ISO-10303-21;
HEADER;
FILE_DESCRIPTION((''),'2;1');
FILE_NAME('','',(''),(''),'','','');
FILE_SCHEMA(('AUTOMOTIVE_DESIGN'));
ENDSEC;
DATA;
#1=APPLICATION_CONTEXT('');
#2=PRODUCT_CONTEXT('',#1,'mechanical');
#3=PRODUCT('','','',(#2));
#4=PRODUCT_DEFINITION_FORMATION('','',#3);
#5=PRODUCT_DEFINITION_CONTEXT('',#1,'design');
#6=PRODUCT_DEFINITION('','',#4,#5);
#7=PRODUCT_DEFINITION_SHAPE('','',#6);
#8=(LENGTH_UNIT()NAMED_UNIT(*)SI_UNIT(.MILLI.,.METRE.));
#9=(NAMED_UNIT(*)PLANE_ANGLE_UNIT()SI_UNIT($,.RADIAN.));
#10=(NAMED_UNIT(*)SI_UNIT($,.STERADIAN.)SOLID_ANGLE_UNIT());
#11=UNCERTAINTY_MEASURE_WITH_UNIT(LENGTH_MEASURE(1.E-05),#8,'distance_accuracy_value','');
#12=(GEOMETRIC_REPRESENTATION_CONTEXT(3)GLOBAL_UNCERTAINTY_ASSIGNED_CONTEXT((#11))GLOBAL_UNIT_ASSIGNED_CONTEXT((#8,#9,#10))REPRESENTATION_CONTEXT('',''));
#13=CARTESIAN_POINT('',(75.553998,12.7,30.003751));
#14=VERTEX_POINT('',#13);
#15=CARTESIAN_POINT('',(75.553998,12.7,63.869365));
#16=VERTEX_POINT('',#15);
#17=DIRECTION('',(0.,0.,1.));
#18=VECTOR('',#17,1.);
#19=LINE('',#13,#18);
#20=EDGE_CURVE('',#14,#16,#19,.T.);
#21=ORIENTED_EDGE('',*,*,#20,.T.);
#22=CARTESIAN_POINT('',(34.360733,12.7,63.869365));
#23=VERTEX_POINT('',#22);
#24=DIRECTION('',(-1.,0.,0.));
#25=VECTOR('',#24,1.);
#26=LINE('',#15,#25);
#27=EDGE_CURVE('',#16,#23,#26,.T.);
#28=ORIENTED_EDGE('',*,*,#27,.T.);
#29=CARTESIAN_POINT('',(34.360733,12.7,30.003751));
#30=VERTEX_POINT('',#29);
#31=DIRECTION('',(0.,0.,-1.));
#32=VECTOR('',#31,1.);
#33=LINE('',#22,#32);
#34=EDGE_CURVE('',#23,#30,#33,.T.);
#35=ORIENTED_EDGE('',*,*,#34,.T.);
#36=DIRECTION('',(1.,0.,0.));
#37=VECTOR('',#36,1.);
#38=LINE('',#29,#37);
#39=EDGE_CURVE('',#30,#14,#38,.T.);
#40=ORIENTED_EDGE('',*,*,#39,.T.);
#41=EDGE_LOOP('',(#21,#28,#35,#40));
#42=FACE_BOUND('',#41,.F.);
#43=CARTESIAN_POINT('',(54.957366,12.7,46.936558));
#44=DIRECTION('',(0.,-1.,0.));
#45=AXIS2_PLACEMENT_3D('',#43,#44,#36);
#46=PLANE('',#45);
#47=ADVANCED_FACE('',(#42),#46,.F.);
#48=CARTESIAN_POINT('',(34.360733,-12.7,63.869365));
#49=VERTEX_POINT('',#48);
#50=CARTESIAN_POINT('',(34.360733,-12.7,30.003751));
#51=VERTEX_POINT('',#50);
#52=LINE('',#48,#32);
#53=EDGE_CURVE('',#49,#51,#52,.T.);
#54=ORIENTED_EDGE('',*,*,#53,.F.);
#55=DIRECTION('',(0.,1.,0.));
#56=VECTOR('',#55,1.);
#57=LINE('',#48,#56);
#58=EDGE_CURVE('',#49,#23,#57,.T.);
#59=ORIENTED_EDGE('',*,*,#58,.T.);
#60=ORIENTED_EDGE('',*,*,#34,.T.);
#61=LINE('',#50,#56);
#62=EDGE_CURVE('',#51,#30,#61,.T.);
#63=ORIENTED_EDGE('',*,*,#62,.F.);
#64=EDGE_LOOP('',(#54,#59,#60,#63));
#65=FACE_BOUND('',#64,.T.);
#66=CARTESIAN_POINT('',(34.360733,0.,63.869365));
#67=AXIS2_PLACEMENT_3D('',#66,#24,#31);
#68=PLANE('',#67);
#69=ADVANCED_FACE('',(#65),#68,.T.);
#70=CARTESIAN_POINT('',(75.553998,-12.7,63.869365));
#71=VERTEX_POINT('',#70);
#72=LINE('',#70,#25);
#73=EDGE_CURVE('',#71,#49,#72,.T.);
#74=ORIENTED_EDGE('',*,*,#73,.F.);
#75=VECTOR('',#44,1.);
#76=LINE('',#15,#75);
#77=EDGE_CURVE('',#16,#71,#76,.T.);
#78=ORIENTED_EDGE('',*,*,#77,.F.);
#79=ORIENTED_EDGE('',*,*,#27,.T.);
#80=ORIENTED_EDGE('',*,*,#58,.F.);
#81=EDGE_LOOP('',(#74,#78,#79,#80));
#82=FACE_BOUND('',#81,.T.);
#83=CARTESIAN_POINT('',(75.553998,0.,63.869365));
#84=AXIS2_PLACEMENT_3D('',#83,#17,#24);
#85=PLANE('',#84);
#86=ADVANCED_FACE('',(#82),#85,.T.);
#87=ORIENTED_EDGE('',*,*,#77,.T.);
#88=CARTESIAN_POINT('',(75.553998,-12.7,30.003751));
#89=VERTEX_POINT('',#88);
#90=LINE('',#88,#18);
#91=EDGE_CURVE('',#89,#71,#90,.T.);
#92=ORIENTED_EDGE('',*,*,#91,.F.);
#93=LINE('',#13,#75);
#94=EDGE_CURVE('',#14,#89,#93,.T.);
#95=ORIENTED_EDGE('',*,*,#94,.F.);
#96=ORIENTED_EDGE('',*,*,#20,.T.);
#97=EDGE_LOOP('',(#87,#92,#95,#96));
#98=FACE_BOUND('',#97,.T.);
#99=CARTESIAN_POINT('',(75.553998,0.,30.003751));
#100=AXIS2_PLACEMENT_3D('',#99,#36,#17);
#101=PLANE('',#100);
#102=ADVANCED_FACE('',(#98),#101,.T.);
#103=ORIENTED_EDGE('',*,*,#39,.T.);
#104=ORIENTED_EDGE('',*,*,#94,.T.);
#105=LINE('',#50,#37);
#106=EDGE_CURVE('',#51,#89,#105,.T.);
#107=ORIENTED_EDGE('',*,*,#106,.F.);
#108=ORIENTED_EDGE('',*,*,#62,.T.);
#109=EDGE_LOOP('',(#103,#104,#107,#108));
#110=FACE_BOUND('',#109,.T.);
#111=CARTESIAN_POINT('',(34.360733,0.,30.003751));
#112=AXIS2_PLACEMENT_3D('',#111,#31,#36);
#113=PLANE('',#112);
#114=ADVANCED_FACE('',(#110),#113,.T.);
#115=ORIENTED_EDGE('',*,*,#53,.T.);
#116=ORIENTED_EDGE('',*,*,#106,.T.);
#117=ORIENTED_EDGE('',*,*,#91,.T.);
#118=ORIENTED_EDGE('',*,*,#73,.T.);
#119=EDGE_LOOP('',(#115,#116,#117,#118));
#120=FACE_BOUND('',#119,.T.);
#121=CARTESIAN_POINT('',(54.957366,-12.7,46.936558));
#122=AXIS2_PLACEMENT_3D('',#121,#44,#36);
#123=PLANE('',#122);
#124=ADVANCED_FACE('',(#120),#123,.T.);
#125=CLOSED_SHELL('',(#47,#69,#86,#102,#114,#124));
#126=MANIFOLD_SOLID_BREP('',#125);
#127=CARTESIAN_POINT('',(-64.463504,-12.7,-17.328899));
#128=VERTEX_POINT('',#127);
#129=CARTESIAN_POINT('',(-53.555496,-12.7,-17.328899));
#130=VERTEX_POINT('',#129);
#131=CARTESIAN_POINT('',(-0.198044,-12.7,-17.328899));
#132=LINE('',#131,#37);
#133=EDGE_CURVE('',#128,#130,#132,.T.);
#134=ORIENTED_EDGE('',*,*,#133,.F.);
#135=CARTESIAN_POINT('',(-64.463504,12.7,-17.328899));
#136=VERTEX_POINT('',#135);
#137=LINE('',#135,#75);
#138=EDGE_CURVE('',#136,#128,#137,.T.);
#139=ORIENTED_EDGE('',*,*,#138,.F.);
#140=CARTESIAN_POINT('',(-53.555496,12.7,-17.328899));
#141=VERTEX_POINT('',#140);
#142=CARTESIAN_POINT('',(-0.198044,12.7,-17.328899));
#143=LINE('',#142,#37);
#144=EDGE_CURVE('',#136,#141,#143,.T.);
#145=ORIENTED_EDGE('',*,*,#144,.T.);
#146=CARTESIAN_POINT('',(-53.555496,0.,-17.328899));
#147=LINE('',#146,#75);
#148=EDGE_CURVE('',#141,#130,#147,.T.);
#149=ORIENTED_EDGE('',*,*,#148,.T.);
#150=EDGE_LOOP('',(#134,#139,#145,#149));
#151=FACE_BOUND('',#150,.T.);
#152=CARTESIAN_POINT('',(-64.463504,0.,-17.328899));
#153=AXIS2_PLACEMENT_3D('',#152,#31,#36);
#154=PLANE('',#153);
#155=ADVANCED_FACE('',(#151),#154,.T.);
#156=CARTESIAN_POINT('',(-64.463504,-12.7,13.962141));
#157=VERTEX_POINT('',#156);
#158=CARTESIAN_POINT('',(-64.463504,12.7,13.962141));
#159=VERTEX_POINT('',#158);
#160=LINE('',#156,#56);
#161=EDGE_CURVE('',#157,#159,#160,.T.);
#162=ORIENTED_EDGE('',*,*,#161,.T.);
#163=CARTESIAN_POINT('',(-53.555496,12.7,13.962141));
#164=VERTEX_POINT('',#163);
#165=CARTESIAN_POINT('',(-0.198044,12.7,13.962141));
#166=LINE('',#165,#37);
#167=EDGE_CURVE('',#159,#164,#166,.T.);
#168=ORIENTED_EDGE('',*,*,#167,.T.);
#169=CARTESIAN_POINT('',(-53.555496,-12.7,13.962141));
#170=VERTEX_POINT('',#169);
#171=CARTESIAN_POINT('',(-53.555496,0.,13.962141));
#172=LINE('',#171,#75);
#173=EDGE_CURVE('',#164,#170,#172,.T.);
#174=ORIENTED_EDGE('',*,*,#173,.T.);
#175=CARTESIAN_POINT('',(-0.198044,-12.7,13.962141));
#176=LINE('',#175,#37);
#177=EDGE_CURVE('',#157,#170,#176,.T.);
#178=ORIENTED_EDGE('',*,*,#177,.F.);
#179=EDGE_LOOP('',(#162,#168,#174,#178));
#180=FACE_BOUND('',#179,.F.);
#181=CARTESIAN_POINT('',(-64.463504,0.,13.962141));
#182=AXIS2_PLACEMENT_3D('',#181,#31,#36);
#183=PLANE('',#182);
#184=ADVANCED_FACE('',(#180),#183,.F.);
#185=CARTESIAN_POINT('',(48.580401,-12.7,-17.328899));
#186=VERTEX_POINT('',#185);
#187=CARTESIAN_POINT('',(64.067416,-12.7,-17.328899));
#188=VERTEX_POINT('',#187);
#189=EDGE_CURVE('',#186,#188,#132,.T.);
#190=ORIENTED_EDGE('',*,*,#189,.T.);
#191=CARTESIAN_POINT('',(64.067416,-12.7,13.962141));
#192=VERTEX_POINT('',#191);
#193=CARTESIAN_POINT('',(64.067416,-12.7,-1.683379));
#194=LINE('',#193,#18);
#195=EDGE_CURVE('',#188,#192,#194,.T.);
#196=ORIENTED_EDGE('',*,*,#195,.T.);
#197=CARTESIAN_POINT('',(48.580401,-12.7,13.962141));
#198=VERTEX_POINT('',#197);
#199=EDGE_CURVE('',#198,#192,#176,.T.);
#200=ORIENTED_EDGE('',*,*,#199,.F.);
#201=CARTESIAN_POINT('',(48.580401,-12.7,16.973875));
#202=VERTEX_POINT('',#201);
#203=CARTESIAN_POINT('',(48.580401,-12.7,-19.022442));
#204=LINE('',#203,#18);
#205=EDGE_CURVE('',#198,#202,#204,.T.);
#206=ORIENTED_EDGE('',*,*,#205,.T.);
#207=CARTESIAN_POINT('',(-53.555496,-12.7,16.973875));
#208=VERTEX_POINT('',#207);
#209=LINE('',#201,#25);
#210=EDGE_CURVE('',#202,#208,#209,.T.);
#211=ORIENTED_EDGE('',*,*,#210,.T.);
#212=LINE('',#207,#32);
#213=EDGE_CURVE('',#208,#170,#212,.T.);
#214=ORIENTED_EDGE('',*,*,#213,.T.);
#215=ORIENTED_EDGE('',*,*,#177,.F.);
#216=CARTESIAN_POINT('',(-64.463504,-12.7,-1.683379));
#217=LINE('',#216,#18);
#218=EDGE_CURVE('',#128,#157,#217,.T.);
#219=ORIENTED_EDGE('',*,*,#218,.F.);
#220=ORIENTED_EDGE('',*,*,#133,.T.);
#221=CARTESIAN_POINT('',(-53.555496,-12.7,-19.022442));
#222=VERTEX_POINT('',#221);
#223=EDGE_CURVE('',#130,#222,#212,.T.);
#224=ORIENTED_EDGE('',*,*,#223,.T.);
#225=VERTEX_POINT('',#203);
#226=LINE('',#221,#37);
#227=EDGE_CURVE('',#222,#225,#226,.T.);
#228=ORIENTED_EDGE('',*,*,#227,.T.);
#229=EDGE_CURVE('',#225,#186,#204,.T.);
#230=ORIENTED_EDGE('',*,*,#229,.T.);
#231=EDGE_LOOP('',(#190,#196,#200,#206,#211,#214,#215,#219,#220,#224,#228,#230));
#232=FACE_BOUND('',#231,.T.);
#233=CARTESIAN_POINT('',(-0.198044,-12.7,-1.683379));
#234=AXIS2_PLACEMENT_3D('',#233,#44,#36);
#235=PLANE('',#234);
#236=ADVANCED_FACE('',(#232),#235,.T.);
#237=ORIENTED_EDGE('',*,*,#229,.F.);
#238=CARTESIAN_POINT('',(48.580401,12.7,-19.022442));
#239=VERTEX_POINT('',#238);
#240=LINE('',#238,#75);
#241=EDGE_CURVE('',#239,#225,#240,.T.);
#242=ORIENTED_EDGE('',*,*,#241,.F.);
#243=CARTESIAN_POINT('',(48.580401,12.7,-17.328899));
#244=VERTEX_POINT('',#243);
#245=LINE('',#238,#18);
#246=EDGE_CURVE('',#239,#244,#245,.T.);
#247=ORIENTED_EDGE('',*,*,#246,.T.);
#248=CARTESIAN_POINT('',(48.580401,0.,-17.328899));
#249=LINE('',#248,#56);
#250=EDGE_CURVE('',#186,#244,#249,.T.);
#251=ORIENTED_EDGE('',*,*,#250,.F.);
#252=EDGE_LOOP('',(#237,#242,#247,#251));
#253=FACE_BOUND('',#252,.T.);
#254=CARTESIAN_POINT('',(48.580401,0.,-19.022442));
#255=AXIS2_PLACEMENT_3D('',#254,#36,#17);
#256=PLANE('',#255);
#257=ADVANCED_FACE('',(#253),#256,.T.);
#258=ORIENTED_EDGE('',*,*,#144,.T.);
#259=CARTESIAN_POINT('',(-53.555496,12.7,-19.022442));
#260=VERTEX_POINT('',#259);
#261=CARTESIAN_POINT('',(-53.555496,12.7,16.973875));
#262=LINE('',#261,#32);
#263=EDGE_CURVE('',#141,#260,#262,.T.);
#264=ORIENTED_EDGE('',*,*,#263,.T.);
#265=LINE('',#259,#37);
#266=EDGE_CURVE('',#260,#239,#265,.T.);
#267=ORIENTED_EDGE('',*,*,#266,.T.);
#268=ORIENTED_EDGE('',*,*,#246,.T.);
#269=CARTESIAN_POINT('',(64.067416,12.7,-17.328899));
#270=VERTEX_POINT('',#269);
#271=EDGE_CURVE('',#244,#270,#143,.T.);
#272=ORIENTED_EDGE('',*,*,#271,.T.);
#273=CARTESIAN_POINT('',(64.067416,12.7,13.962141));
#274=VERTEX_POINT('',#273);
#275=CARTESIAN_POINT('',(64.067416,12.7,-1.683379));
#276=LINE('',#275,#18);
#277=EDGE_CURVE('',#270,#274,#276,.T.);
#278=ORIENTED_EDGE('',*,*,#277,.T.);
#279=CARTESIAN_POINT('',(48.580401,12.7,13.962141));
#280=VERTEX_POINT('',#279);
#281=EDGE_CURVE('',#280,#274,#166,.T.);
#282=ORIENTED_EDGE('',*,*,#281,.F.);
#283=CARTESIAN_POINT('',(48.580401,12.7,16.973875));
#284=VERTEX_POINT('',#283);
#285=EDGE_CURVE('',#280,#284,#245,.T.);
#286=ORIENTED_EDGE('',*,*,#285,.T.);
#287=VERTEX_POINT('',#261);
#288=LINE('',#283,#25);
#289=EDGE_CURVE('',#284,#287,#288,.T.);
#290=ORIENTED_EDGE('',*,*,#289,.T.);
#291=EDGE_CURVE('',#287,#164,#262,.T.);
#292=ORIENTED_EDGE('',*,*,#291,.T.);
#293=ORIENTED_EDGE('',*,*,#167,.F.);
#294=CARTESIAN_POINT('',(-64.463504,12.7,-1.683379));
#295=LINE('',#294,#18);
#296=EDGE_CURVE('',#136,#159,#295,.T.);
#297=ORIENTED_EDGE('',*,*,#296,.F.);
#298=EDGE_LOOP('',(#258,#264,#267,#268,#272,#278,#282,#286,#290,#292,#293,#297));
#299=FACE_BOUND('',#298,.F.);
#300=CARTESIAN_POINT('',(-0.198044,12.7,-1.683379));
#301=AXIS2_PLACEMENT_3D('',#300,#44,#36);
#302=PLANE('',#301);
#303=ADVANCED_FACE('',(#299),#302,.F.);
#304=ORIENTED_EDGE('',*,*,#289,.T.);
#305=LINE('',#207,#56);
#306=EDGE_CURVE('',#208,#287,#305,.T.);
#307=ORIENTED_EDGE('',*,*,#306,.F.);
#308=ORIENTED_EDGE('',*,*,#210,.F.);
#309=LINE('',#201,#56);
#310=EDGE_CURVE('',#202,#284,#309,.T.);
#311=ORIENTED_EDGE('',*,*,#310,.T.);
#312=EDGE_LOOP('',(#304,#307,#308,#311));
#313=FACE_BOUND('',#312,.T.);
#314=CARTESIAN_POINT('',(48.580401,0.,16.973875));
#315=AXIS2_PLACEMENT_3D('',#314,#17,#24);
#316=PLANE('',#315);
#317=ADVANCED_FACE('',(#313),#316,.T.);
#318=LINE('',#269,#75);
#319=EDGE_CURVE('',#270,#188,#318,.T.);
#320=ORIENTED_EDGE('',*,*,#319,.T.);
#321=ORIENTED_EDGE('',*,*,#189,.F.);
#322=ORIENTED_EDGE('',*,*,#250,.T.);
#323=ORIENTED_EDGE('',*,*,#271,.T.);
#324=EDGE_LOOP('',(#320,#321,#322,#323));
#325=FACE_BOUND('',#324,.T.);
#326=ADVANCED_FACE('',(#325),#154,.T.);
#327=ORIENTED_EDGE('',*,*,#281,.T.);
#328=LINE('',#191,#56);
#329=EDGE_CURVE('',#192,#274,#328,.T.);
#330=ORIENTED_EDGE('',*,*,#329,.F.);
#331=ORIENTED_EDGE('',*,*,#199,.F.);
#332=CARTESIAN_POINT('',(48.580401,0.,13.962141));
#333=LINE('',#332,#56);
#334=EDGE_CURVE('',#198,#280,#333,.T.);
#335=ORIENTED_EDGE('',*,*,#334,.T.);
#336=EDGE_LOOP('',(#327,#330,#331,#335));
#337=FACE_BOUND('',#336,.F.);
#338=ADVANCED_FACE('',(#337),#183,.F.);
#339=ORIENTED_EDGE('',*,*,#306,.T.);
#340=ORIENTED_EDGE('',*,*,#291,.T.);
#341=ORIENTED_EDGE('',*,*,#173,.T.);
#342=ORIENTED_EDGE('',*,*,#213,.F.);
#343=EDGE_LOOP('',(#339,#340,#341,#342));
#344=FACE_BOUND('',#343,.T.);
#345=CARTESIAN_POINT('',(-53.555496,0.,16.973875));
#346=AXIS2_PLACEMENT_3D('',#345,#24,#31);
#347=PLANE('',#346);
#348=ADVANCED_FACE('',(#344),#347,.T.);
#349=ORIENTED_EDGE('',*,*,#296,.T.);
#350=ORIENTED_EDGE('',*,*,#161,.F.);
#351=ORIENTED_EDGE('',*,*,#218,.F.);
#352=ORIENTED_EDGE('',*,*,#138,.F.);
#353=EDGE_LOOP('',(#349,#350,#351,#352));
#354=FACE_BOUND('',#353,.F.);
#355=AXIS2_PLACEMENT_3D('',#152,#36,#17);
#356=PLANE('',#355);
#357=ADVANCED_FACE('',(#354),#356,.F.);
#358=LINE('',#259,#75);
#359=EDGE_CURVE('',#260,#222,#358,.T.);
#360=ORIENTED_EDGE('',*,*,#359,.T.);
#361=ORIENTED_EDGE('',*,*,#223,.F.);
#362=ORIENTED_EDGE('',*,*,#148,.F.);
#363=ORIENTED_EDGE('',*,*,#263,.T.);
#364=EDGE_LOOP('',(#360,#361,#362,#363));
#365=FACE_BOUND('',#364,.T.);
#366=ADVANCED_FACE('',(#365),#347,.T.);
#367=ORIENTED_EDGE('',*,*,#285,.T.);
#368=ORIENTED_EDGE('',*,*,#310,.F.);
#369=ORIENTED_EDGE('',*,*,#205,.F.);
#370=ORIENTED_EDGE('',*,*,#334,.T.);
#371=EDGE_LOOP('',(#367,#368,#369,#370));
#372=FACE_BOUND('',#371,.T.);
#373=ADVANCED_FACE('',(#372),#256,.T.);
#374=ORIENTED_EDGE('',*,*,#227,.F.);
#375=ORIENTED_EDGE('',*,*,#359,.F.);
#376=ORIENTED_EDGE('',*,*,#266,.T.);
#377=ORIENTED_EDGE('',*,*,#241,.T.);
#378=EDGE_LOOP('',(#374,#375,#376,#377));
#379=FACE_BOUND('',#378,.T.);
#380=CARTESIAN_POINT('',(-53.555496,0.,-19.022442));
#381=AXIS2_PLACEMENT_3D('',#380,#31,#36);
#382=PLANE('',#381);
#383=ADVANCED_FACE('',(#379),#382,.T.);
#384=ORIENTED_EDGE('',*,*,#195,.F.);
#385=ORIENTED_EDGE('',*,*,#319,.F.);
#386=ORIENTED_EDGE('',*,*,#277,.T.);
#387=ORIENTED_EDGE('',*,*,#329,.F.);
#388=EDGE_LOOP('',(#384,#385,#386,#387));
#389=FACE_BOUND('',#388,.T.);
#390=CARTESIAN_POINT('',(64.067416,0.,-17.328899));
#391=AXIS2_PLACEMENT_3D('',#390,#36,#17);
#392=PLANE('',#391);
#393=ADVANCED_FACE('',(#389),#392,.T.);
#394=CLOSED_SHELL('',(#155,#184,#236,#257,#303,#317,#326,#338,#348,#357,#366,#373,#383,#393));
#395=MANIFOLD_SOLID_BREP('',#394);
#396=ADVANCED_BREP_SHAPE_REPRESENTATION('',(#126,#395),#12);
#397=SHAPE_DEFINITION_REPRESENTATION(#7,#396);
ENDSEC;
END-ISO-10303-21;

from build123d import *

# Parameters (mm, degrees)
F5_DEPTH = 12.7
F7_DEPTH = 12.7
F2_W     = 128.5309195518
F2_H     = 31.2910405919


# Not quite as in the source:
# - the program builds the solid bodies; features that only make, move or delete a surface that nothing else refers to are left out


with BuildPart() as f5:
    # F3 (on Front) → F5 (new body, symmetric)
    with BuildSketch(Plane.XZ):
        Polygon((35.4110151529, 16.973875463), (-53.555496037, 16.973875463), (-53.555496037, -19.0224424005), (48.5804006457, -19.0224424005), (48.5804006457, 16.973875463), align=None)
    extrude(amount=F5_DEPTH, both=True)

    # F2 (on Front) → F7, piece 2 (join, symmetric)
    with BuildSketch(Plane.XZ):
        with Locations((-0.1980438828, -1.6833790578)):
            Rectangle(F2_W, F2_H)
    extrude(amount=F7_DEPTH, both=True)


with BuildPart() as f7:
    # F2 (on Front) → F7 (new body, symmetric)
    with BuildSketch(Plane.XZ):
        Polygon((34.3607328832, 30.0037506968), (64.0674158931, 30.0037506968), (75.5539983511, 30.0037506968), (75.5539983511, 63.8693645597), (34.3607328832, 63.8693645597), align=None)
    extrude(amount=F7_DEPTH, both=True)


solid = Compound([f5.part, f7.part])
